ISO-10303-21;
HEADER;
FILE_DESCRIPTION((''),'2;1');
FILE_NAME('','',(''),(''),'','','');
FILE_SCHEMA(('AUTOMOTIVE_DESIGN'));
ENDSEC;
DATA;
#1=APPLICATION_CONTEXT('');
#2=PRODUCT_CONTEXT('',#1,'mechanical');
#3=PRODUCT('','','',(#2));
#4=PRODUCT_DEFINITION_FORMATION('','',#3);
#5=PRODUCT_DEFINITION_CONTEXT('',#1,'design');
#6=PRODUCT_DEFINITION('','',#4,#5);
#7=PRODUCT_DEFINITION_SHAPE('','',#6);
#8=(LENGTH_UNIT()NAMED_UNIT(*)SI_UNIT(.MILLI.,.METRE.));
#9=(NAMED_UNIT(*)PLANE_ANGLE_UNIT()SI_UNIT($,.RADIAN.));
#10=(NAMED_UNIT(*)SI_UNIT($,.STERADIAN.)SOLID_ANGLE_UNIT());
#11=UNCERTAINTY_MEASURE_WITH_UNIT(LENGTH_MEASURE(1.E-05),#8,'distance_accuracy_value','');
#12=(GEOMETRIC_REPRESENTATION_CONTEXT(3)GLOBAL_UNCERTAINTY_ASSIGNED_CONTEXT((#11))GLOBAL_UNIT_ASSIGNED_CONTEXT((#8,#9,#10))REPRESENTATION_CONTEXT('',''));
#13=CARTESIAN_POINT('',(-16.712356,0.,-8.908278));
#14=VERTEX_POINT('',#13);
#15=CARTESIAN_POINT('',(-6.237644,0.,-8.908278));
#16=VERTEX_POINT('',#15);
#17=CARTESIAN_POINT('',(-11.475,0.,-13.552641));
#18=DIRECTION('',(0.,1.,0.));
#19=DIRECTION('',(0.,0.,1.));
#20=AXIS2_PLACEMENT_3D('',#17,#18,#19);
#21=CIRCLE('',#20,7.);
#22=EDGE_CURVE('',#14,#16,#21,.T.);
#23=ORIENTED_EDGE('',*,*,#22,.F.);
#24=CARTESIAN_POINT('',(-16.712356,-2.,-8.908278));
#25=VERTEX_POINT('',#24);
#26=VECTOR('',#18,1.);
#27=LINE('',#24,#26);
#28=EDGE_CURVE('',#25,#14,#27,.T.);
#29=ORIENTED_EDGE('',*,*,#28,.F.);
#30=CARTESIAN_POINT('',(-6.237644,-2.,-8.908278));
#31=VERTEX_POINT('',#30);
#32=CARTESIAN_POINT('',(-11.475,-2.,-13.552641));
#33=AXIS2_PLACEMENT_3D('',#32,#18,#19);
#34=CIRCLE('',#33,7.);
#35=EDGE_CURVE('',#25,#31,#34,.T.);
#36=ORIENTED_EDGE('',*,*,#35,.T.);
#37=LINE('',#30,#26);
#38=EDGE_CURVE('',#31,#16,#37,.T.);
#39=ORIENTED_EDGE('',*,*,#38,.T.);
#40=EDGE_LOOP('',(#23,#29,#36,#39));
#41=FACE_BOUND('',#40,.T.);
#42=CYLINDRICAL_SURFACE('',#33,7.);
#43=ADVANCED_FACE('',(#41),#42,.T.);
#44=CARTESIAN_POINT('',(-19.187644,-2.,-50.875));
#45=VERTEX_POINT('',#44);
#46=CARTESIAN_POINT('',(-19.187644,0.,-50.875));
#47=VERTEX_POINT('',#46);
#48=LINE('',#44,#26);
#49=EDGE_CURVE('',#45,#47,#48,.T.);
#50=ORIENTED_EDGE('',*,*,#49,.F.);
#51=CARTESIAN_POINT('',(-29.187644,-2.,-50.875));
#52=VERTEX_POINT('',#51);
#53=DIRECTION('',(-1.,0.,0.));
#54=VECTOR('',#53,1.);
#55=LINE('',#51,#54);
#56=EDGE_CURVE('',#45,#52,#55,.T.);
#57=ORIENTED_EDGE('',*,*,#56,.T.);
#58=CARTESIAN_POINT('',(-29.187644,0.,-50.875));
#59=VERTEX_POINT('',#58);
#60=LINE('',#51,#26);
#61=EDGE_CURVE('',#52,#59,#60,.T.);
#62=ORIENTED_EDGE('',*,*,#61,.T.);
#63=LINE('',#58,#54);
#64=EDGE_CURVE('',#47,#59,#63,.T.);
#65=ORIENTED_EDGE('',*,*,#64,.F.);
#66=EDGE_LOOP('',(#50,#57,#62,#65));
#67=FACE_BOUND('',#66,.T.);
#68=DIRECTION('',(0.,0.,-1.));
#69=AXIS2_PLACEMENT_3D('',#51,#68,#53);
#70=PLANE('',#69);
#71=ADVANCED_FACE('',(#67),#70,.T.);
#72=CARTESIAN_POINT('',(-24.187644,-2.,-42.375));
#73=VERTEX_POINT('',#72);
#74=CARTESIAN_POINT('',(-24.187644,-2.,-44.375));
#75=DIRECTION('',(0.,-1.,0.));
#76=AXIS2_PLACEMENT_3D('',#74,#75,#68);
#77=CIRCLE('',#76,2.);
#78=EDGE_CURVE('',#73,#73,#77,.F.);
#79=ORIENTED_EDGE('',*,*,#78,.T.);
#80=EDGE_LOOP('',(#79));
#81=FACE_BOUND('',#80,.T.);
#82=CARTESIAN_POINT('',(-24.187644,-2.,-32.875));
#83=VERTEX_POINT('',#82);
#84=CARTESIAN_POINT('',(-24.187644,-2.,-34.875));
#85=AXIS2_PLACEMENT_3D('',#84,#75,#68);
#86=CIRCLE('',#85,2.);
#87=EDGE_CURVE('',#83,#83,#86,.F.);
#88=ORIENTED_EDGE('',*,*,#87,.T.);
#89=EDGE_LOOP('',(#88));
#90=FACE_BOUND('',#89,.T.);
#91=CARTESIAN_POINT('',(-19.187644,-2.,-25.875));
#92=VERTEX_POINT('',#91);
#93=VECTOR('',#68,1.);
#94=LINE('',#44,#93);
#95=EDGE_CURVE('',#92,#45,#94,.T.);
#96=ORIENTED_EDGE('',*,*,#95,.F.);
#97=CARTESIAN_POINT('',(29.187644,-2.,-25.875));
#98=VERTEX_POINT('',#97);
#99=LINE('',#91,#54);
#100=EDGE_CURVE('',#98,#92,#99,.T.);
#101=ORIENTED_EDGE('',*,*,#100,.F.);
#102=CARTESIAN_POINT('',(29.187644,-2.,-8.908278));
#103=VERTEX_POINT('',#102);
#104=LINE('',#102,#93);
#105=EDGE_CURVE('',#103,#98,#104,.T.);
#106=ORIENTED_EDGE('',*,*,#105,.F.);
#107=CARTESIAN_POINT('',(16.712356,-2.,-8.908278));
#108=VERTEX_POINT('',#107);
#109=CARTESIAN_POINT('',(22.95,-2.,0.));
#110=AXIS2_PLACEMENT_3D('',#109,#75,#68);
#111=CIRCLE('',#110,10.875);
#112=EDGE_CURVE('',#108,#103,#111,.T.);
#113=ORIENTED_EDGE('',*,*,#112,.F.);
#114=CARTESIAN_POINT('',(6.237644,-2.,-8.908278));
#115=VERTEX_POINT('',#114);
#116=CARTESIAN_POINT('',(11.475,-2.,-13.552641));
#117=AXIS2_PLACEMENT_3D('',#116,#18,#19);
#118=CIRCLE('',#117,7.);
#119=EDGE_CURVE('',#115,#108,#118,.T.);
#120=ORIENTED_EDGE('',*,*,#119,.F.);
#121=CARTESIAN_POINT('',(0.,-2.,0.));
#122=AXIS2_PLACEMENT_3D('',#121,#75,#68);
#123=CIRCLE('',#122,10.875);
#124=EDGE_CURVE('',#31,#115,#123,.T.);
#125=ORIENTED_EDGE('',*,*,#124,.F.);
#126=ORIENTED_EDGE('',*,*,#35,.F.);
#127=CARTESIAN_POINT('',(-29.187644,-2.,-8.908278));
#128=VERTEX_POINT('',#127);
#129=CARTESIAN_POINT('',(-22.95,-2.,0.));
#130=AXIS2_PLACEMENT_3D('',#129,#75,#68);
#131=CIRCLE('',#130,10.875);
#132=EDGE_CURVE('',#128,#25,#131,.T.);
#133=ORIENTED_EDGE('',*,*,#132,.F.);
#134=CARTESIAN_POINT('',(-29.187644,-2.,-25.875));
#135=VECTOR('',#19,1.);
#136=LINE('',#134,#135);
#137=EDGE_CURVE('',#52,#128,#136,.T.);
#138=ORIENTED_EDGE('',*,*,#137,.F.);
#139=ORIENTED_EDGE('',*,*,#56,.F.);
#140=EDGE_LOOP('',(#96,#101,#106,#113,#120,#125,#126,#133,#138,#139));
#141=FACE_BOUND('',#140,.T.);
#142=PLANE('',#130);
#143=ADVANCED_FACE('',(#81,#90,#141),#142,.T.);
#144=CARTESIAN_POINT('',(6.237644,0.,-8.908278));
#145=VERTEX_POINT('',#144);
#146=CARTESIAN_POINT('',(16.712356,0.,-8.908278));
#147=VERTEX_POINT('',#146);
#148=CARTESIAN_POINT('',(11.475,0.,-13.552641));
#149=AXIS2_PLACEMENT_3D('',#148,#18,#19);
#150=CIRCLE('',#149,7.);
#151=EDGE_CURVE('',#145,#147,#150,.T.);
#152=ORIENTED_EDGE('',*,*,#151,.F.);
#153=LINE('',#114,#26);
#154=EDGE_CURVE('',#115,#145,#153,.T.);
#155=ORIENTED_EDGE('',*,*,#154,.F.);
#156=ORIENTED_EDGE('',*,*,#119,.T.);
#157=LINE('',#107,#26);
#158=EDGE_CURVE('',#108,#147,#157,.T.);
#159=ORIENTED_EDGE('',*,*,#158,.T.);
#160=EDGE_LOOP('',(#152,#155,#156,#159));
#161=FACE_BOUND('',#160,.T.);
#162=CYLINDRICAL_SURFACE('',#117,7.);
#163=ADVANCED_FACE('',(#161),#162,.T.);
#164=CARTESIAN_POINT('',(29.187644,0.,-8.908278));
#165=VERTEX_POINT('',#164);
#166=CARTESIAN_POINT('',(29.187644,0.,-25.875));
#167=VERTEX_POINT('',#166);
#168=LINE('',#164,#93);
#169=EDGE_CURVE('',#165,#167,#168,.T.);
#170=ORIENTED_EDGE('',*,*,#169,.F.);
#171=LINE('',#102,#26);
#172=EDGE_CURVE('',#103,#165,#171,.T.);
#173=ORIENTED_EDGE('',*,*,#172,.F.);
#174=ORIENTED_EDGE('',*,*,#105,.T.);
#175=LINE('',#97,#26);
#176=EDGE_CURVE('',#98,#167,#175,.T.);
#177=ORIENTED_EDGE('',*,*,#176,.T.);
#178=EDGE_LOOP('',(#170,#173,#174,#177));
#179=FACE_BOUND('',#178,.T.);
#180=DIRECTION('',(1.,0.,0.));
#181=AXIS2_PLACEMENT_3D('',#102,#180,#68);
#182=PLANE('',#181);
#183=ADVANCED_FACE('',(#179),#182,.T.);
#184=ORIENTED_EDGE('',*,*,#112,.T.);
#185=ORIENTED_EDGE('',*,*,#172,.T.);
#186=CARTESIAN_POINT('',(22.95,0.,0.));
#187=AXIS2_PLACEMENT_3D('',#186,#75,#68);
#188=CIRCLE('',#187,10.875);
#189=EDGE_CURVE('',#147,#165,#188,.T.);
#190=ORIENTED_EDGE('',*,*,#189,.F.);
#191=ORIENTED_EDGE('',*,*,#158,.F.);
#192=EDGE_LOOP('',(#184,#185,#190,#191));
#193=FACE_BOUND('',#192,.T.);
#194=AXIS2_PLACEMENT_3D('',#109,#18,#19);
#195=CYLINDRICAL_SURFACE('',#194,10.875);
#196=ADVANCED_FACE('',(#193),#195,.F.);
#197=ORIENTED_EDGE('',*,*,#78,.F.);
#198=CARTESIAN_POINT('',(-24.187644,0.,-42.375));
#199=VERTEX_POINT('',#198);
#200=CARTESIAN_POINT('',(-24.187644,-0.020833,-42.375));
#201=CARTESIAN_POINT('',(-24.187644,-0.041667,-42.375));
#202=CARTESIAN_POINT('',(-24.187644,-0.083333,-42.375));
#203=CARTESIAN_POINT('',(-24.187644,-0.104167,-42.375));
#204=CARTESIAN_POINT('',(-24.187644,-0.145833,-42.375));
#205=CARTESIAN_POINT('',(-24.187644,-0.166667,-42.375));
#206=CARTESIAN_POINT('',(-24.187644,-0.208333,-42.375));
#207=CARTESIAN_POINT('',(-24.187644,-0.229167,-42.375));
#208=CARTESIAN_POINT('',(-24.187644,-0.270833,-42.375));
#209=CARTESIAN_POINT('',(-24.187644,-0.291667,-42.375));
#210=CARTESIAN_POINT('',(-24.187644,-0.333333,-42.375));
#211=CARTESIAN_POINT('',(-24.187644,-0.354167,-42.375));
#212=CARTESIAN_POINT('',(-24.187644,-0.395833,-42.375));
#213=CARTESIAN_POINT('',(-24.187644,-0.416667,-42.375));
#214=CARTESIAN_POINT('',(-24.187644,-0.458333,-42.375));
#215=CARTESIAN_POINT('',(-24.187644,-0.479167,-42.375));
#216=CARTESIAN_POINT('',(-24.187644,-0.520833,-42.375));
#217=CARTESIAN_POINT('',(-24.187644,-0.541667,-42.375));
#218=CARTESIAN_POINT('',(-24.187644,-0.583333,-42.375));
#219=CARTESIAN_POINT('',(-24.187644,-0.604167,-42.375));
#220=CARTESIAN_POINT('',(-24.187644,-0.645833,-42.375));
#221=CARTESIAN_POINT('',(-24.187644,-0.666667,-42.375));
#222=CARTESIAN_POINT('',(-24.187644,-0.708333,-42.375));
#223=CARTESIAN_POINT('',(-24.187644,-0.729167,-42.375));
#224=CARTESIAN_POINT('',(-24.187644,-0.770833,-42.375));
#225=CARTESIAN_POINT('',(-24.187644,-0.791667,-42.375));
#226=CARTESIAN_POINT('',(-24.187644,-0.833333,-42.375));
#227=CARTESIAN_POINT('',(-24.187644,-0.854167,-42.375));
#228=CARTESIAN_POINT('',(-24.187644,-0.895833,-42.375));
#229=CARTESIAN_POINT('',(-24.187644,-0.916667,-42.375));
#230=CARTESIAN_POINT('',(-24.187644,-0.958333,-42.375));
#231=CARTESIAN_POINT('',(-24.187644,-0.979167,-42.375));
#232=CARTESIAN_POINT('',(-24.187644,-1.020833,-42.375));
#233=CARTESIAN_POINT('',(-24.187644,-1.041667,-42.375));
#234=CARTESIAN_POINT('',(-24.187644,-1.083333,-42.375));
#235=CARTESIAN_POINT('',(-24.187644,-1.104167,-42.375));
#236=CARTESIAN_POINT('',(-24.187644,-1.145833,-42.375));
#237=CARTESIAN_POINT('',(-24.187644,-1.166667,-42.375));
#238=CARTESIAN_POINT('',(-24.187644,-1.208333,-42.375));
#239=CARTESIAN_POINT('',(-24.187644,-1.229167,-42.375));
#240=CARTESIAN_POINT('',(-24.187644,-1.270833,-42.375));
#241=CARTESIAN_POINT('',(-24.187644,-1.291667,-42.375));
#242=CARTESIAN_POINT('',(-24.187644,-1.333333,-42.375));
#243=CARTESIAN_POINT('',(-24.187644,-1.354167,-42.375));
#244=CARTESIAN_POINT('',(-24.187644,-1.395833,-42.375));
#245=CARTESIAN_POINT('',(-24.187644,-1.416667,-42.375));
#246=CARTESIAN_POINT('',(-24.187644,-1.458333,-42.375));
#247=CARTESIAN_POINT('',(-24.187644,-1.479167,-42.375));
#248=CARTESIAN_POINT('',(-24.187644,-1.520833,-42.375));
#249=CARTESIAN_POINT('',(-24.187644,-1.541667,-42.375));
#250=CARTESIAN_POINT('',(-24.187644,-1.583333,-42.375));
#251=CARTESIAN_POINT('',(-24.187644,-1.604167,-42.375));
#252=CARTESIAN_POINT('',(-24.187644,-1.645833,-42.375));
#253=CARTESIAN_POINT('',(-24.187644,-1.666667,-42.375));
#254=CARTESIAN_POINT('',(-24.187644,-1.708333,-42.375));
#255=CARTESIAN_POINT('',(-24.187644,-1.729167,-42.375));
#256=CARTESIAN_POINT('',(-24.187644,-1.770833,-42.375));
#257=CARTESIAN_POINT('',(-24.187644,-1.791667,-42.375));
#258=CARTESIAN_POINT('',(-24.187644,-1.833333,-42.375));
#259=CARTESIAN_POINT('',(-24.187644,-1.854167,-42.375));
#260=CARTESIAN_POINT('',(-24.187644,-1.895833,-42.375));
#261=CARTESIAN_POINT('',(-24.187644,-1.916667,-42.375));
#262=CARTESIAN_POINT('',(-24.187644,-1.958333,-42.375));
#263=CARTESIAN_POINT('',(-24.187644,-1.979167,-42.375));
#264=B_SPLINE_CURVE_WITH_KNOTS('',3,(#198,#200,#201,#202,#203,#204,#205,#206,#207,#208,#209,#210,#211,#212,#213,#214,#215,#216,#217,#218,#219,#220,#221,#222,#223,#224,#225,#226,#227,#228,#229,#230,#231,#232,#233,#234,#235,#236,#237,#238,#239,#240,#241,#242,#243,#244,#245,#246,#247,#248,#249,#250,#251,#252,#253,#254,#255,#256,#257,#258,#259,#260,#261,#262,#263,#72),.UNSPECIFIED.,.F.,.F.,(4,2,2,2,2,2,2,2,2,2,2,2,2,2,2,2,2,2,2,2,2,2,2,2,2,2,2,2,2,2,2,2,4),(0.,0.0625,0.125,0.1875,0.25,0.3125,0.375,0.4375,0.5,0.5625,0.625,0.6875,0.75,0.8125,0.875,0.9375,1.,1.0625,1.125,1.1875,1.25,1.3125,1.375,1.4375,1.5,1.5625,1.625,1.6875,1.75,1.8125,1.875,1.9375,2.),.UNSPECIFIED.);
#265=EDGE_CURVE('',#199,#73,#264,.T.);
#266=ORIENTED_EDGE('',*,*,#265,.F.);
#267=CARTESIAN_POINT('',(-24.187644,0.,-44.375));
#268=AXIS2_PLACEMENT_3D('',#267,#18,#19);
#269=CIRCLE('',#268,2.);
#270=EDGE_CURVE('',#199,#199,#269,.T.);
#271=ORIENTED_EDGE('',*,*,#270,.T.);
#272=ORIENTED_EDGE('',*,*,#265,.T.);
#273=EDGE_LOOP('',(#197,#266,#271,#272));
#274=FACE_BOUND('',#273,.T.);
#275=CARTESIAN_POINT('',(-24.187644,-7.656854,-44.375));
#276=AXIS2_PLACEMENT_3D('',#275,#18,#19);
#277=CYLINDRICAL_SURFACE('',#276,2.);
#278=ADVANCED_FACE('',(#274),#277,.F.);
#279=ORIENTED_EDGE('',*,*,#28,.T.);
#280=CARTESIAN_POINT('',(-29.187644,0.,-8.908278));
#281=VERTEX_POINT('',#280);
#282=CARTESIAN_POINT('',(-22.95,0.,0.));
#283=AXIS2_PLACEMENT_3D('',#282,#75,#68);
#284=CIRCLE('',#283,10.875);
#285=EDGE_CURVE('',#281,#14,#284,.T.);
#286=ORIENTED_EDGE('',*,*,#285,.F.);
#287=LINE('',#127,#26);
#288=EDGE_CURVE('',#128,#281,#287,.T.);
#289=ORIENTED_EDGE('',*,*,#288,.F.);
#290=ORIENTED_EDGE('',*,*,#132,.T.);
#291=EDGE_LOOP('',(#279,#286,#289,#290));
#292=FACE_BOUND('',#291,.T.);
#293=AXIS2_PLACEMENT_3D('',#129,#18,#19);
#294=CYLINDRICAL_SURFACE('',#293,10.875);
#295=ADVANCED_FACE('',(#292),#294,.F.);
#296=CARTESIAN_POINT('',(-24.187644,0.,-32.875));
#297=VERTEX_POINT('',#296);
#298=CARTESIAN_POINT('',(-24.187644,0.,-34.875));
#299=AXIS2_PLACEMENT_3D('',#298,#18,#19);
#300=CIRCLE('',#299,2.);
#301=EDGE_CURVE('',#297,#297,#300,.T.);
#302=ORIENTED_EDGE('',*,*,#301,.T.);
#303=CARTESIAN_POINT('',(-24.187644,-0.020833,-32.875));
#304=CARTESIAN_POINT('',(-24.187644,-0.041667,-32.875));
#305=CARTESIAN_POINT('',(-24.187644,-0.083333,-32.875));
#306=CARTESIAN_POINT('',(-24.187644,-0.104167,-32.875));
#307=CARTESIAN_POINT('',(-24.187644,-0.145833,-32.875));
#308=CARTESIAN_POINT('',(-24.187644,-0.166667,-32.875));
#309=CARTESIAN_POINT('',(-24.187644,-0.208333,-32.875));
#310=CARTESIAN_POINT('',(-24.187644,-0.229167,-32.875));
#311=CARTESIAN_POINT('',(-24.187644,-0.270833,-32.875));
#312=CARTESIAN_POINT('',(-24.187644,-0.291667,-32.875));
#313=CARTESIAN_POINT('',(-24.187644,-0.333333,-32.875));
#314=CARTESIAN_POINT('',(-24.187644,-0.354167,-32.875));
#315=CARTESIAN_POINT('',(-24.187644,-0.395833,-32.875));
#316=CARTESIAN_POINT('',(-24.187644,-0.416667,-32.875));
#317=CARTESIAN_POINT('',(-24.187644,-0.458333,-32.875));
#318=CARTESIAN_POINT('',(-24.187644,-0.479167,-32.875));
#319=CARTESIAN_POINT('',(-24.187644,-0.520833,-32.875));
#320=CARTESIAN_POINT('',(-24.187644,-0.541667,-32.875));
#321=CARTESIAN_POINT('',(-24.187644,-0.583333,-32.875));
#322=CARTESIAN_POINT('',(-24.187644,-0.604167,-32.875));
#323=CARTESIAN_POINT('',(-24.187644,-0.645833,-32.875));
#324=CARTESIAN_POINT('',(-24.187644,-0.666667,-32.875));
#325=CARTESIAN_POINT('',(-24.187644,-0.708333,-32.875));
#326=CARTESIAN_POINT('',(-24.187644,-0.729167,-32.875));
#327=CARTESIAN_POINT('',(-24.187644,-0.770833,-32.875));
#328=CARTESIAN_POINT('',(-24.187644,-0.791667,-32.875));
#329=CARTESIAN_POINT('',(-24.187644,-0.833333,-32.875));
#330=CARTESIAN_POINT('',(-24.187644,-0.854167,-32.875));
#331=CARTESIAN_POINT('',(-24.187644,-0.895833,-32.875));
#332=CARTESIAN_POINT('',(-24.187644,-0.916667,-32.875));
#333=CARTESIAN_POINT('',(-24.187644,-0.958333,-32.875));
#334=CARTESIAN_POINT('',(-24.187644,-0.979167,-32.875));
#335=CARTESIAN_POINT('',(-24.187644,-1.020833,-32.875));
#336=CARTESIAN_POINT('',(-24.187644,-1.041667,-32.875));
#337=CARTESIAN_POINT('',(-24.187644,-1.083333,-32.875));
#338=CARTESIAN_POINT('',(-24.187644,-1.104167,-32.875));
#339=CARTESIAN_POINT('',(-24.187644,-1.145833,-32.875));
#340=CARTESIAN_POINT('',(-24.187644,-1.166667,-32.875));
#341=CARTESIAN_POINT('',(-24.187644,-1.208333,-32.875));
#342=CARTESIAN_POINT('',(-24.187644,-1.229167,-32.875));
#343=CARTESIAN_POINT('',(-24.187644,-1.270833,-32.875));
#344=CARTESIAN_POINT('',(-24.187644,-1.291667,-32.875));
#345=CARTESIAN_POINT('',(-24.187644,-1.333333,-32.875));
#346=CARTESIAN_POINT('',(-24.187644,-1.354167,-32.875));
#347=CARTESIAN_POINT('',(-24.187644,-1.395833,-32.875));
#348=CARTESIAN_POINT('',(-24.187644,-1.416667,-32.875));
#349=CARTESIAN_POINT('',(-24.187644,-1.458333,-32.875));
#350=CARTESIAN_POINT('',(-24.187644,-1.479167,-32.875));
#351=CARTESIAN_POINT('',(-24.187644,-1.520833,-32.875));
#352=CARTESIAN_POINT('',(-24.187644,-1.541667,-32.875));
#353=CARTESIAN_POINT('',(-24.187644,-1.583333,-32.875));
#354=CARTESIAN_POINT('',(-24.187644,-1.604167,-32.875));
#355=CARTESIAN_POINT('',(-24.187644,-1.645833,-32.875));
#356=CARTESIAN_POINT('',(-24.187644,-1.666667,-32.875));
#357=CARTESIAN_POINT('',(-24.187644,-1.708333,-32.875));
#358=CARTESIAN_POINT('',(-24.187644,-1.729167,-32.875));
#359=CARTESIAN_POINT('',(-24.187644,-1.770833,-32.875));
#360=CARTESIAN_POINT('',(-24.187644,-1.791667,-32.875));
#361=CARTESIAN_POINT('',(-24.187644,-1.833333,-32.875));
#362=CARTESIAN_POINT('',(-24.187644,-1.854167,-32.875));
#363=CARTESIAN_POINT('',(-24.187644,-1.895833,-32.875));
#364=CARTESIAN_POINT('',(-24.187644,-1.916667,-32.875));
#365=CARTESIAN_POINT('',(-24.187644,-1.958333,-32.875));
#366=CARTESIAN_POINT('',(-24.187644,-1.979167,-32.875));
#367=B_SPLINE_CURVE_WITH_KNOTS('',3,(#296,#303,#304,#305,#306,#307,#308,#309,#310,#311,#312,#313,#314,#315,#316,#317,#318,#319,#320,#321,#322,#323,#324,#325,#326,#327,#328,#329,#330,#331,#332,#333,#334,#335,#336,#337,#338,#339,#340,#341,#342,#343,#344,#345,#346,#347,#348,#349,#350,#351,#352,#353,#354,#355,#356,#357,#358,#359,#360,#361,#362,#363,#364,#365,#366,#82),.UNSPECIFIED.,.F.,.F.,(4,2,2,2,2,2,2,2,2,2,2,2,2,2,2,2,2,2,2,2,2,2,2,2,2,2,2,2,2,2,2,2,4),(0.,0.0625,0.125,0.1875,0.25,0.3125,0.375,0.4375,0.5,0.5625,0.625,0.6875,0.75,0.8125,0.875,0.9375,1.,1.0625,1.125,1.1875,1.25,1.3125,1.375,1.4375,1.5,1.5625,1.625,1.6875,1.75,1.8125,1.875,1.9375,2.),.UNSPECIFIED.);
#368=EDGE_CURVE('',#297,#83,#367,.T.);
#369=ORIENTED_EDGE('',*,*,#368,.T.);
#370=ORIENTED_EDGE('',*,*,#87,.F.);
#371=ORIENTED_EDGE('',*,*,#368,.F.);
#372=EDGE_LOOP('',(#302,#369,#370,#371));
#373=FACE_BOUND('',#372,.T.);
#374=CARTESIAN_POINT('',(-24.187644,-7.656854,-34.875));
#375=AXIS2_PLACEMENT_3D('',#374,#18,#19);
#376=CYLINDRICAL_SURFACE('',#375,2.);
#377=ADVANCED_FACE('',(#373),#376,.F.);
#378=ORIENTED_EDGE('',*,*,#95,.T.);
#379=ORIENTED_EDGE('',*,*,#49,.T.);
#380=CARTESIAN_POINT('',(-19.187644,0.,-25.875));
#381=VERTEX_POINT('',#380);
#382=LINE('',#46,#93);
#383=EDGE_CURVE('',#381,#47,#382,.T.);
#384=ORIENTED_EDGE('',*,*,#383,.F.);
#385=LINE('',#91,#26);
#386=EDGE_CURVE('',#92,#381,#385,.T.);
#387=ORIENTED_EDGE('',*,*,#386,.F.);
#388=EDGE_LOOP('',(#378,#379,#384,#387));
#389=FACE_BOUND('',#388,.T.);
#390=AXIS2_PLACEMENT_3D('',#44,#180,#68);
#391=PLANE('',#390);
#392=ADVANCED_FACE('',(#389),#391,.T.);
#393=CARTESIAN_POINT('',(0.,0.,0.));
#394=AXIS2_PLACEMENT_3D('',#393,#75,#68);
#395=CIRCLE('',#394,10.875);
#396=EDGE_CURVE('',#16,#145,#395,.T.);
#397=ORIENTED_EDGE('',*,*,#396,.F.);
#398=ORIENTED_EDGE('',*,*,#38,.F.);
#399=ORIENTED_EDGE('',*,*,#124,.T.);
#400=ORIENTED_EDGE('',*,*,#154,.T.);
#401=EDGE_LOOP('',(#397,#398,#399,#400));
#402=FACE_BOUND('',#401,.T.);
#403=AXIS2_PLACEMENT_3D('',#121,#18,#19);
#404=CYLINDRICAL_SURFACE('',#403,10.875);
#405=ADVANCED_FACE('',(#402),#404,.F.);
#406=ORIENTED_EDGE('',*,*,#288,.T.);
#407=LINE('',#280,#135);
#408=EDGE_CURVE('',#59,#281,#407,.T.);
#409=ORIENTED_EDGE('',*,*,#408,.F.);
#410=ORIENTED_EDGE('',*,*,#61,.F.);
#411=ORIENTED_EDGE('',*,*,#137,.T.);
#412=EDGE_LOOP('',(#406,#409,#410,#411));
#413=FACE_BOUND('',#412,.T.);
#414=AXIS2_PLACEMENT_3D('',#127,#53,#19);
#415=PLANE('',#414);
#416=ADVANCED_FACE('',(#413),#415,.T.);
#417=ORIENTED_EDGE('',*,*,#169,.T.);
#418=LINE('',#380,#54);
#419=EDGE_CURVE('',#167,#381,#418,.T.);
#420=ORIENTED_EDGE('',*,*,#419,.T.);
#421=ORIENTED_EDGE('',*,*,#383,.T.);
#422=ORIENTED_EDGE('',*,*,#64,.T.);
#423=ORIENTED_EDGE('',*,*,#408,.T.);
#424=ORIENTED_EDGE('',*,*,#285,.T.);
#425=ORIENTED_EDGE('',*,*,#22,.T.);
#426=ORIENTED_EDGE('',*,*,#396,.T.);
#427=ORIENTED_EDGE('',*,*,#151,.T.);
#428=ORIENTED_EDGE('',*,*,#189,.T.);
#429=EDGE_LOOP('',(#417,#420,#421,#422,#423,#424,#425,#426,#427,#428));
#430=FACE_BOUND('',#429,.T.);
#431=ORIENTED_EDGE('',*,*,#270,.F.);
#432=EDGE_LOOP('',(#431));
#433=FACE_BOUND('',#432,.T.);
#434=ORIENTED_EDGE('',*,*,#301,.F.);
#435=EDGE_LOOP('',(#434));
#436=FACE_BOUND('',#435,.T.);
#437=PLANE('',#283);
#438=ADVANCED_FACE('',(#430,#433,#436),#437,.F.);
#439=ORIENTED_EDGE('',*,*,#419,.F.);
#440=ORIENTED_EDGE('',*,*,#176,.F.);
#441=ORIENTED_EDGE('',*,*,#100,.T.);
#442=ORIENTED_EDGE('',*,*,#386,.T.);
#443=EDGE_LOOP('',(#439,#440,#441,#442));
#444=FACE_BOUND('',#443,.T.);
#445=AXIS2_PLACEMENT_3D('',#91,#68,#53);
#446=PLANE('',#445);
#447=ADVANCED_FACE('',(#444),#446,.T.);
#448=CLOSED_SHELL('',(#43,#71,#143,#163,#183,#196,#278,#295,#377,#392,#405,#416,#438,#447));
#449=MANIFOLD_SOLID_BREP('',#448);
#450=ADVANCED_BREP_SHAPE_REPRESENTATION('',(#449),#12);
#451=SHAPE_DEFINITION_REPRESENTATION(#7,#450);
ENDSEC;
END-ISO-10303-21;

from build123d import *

# Parameters (mm, degrees)
BASE_FLANGE1_DEPTH = 2
SKETCH8_R          = 2
CUT_EXTRUDE1_DEPTH = 2


# Sheet-metal steps are written as plain solids
with BuildPart() as part:
    # Sketch3 → Base-Flange1 (new body)
    with BuildSketch(Plane(origin=(0, 0, 0), x_dir=(1, 0, 0), z_dir=(0, 1, 0))):
        with BuildLine():
            Line((-29.187643745, 8.908278482), (-29.187643745, 25.875))
            Line((-29.187643745, 25.875), (-29.187643745, 50.875))
            Line((-29.187643745, 50.875), (-19.187643745, 50.875))
            Line((-19.187643745, 50.875), (-19.187643745, 25.875))
            Line((-19.187643745, 25.875), (29.187643745, 25.875))
            Line((29.187643745, 25.875), (29.187643745, 8.908278482))
            ThreePointArc((29.187643745, 8.908278482), (22.95, 10.875), (16.712356255, 8.908278482))
            ThreePointArc((16.712356255, 8.908278482), (11.475, 6.552640597), (6.237643745, 8.908278482))
            ThreePointArc((6.237643745, 8.908278482), (0, 10.875), (-6.237643745, 8.908278482))
            ThreePointArc((-6.237643745, 8.908278482), (-11.475, 6.552640597), (-16.712356255, 8.908278482))
            ThreePointArc((-16.712356255, 8.908278482), (-22.95, 10.875), (-29.187643745, 8.908278482))
        make_face()
    extrude(amount=-BASE_FLANGE1_DEPTH)

    # Sketch8 → Cut-Extrude1 (cut)
    with BuildSketch(Plane(origin=(0, 0, 0), x_dir=(1, 0, 0), z_dir=(0, 1, 0))):
        with Locations(Location((-24.187643745, 44.375, 0), (0, 0, 270))):
            Circle(SKETCH8_R)
        with Locations(Location((-24.187643745, 34.875, 0), (0, 0, 270))):
            Circle(SKETCH8_R)
    extrude(amount=-CUT_EXTRUDE1_DEPTH, mode=Mode.SUBTRACT)


solid = part.part
